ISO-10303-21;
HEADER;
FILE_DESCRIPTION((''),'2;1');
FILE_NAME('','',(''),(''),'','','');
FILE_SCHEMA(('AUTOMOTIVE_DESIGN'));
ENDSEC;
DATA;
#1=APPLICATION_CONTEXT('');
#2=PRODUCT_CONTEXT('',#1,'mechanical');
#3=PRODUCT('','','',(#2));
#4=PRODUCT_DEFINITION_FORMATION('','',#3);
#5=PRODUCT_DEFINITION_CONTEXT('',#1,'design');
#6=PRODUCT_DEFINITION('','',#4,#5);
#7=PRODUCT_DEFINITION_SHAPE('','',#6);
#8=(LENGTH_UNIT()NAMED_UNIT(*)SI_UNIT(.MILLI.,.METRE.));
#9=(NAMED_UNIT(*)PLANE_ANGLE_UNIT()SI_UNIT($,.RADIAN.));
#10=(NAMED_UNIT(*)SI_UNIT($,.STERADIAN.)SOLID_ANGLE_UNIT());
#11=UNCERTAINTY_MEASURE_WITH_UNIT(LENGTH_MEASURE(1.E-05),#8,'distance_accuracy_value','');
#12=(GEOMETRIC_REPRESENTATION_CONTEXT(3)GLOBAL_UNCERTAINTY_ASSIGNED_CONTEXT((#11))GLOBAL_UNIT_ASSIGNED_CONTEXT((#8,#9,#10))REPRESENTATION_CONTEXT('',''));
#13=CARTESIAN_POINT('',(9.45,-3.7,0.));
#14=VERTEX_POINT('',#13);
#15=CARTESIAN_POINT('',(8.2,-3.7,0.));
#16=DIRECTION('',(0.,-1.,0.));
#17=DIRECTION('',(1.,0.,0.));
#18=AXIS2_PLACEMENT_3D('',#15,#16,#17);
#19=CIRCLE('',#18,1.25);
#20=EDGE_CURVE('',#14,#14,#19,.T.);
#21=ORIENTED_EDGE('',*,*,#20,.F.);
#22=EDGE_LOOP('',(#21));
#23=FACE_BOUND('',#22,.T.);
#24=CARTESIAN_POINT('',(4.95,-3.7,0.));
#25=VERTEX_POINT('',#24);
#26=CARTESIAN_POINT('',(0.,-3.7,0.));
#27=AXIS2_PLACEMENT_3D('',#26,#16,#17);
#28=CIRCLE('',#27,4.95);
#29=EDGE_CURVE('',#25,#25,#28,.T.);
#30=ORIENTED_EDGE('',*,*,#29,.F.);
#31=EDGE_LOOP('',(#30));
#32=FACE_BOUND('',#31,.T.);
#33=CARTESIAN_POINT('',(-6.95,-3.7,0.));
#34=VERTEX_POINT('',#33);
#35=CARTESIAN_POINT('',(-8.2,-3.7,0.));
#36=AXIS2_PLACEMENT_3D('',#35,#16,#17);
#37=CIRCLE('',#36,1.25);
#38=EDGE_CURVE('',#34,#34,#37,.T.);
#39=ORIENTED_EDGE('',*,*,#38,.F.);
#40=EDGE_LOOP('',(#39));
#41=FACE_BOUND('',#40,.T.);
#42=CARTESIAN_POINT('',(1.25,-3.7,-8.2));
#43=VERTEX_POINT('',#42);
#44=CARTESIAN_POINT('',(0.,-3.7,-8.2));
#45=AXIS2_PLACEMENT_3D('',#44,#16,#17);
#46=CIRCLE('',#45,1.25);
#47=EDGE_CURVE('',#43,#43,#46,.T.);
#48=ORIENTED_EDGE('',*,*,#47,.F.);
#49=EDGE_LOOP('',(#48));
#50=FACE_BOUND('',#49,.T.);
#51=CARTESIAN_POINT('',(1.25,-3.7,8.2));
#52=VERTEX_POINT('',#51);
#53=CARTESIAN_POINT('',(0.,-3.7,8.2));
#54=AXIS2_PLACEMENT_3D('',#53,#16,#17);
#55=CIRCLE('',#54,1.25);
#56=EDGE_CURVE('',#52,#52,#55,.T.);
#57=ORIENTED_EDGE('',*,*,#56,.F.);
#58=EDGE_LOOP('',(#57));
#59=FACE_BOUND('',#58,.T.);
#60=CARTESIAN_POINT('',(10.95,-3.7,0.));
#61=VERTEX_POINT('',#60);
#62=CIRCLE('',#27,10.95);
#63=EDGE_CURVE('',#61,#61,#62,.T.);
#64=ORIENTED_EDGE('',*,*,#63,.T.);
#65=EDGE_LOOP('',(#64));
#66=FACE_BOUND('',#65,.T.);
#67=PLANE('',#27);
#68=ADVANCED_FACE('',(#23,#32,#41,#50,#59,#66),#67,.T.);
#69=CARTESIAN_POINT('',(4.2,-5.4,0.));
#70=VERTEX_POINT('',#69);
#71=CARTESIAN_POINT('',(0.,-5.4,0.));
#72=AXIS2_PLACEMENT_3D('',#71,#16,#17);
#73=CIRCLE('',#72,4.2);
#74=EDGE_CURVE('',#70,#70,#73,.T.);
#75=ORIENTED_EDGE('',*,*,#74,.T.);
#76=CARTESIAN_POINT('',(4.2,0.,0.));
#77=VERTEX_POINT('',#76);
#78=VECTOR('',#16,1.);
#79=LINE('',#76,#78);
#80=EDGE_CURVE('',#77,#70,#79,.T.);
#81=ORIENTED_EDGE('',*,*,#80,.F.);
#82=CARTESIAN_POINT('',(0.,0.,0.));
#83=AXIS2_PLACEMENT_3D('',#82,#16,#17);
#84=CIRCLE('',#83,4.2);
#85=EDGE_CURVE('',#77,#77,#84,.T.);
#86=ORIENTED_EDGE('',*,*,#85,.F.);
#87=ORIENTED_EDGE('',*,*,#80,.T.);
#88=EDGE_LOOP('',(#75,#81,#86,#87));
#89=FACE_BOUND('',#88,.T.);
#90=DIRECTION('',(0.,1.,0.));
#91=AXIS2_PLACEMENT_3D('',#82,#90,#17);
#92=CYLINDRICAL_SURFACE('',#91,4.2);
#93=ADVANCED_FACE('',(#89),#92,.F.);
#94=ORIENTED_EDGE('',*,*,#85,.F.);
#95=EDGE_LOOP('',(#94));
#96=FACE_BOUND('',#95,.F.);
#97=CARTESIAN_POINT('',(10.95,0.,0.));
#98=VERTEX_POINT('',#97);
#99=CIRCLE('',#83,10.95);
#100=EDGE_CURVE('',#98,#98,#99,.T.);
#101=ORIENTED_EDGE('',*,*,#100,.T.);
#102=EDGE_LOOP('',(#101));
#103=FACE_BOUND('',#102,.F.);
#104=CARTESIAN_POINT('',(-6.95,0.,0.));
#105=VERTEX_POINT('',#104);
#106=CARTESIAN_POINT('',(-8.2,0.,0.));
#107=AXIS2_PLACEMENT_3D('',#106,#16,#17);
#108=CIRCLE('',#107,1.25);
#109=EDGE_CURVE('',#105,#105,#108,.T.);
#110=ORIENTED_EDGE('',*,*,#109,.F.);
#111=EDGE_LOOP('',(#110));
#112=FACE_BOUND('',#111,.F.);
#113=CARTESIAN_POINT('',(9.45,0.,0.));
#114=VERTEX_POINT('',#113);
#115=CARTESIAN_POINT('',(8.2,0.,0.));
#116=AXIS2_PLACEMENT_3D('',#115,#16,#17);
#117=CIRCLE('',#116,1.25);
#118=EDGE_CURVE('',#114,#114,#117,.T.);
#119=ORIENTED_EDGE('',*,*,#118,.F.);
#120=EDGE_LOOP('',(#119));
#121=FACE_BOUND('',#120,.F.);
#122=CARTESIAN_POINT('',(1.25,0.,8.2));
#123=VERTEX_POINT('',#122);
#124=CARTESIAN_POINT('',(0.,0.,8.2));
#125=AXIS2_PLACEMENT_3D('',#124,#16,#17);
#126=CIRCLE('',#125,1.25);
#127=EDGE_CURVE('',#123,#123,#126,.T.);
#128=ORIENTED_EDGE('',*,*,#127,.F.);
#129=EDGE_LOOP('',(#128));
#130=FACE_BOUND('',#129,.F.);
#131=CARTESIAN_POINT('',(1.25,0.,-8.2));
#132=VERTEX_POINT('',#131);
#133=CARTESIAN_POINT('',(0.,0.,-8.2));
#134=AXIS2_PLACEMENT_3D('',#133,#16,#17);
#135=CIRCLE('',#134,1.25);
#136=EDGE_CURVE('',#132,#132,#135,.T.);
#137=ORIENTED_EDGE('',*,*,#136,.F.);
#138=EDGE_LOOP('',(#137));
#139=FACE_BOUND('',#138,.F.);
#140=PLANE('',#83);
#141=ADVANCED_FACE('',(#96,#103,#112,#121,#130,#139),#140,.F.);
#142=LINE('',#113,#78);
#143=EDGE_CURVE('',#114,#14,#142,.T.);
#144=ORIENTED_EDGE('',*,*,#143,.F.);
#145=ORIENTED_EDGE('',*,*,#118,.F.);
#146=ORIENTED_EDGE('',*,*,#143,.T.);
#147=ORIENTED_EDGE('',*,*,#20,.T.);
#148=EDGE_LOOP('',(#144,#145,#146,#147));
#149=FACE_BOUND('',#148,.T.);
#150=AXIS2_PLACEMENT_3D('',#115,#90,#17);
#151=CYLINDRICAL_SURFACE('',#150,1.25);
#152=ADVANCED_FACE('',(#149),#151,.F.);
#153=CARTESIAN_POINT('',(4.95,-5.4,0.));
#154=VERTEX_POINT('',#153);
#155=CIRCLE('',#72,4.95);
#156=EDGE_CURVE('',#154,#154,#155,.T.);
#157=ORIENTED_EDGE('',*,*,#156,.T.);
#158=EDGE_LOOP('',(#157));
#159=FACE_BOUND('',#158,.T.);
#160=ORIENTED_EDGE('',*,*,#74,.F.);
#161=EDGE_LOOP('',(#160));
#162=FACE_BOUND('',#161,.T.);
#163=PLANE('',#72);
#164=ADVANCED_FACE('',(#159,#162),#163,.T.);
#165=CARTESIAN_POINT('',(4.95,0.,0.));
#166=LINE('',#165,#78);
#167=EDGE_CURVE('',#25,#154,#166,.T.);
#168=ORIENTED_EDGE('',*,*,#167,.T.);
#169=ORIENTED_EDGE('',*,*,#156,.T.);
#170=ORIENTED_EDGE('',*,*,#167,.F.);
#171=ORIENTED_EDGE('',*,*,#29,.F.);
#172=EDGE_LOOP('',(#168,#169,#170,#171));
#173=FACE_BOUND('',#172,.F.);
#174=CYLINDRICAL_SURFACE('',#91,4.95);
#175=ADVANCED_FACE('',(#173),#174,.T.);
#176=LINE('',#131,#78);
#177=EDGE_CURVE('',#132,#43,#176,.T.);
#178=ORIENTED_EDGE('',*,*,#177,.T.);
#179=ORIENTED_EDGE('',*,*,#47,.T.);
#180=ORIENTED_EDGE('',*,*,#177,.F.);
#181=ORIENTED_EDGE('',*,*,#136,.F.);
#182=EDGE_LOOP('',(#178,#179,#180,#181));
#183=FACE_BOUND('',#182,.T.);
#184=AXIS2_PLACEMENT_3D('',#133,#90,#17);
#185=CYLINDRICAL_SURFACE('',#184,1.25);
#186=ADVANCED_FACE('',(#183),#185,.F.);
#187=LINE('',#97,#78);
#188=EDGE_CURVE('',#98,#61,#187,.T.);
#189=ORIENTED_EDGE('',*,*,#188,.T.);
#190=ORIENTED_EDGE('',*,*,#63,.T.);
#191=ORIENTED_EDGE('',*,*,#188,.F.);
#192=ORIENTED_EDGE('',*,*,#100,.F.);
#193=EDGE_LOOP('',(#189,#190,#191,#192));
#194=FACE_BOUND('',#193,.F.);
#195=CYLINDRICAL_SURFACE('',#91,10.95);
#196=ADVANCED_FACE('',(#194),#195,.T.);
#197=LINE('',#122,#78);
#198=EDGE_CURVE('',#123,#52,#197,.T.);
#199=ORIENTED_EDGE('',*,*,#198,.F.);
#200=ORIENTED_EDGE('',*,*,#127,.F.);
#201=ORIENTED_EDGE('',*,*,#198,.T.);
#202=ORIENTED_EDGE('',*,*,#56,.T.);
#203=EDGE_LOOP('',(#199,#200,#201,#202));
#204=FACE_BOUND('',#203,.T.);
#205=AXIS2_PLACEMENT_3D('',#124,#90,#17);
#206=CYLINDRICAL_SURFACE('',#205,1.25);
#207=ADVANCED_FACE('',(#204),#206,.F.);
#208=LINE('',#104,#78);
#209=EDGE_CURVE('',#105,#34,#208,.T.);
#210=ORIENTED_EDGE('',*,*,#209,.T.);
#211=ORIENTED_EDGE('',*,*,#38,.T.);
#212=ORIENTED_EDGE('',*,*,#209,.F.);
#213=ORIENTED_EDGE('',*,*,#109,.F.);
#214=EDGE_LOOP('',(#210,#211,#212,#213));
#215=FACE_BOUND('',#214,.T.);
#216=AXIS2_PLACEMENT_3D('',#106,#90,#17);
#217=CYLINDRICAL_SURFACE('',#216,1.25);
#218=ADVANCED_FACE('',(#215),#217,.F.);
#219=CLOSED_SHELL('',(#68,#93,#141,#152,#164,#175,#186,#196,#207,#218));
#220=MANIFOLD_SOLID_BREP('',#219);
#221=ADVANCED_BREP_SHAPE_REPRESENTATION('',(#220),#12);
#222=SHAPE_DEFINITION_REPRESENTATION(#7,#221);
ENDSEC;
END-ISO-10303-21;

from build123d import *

# Parameters (mm, degrees)
F0_R     = 4.95
F0_R_2   = 4.2
F1_DEPTH = 5.4
F0_R_3   = 10.95
F0_R_4   = 1.25
F2_DEPTH = 3.7


# Not quite as in the source:
# - the program builds the solid bodies; features that only make, move or delete a surface that nothing else refers to are left out


with BuildPart() as f1:
    # F0 (on Front) → F1 (new body)
    with BuildSketch(Plane.XZ):
        Circle(F0_R)
        Circle(F0_R_2, mode=Mode.SUBTRACT)
    extrude(amount=F1_DEPTH)

    # F0 (on Front) → F2 (join)
    with BuildSketch(Plane.XZ):
        Circle(F0_R_3)
        with Locations((0, -8.2)):
            Circle(F0_R_4, mode=Mode.SUBTRACT)
        with Locations((-8.2, 0)):
            Circle(F0_R_4, mode=Mode.SUBTRACT)
        Circle(F0_R, mode=Mode.SUBTRACT)
        with Locations((8.2, 0)):
            Circle(F0_R_4, mode=Mode.SUBTRACT)
        with Locations((0, 8.2)):
            Circle(F0_R_4, mode=Mode.SUBTRACT)
    extrude(amount=F2_DEPTH)


solid = f1.part
